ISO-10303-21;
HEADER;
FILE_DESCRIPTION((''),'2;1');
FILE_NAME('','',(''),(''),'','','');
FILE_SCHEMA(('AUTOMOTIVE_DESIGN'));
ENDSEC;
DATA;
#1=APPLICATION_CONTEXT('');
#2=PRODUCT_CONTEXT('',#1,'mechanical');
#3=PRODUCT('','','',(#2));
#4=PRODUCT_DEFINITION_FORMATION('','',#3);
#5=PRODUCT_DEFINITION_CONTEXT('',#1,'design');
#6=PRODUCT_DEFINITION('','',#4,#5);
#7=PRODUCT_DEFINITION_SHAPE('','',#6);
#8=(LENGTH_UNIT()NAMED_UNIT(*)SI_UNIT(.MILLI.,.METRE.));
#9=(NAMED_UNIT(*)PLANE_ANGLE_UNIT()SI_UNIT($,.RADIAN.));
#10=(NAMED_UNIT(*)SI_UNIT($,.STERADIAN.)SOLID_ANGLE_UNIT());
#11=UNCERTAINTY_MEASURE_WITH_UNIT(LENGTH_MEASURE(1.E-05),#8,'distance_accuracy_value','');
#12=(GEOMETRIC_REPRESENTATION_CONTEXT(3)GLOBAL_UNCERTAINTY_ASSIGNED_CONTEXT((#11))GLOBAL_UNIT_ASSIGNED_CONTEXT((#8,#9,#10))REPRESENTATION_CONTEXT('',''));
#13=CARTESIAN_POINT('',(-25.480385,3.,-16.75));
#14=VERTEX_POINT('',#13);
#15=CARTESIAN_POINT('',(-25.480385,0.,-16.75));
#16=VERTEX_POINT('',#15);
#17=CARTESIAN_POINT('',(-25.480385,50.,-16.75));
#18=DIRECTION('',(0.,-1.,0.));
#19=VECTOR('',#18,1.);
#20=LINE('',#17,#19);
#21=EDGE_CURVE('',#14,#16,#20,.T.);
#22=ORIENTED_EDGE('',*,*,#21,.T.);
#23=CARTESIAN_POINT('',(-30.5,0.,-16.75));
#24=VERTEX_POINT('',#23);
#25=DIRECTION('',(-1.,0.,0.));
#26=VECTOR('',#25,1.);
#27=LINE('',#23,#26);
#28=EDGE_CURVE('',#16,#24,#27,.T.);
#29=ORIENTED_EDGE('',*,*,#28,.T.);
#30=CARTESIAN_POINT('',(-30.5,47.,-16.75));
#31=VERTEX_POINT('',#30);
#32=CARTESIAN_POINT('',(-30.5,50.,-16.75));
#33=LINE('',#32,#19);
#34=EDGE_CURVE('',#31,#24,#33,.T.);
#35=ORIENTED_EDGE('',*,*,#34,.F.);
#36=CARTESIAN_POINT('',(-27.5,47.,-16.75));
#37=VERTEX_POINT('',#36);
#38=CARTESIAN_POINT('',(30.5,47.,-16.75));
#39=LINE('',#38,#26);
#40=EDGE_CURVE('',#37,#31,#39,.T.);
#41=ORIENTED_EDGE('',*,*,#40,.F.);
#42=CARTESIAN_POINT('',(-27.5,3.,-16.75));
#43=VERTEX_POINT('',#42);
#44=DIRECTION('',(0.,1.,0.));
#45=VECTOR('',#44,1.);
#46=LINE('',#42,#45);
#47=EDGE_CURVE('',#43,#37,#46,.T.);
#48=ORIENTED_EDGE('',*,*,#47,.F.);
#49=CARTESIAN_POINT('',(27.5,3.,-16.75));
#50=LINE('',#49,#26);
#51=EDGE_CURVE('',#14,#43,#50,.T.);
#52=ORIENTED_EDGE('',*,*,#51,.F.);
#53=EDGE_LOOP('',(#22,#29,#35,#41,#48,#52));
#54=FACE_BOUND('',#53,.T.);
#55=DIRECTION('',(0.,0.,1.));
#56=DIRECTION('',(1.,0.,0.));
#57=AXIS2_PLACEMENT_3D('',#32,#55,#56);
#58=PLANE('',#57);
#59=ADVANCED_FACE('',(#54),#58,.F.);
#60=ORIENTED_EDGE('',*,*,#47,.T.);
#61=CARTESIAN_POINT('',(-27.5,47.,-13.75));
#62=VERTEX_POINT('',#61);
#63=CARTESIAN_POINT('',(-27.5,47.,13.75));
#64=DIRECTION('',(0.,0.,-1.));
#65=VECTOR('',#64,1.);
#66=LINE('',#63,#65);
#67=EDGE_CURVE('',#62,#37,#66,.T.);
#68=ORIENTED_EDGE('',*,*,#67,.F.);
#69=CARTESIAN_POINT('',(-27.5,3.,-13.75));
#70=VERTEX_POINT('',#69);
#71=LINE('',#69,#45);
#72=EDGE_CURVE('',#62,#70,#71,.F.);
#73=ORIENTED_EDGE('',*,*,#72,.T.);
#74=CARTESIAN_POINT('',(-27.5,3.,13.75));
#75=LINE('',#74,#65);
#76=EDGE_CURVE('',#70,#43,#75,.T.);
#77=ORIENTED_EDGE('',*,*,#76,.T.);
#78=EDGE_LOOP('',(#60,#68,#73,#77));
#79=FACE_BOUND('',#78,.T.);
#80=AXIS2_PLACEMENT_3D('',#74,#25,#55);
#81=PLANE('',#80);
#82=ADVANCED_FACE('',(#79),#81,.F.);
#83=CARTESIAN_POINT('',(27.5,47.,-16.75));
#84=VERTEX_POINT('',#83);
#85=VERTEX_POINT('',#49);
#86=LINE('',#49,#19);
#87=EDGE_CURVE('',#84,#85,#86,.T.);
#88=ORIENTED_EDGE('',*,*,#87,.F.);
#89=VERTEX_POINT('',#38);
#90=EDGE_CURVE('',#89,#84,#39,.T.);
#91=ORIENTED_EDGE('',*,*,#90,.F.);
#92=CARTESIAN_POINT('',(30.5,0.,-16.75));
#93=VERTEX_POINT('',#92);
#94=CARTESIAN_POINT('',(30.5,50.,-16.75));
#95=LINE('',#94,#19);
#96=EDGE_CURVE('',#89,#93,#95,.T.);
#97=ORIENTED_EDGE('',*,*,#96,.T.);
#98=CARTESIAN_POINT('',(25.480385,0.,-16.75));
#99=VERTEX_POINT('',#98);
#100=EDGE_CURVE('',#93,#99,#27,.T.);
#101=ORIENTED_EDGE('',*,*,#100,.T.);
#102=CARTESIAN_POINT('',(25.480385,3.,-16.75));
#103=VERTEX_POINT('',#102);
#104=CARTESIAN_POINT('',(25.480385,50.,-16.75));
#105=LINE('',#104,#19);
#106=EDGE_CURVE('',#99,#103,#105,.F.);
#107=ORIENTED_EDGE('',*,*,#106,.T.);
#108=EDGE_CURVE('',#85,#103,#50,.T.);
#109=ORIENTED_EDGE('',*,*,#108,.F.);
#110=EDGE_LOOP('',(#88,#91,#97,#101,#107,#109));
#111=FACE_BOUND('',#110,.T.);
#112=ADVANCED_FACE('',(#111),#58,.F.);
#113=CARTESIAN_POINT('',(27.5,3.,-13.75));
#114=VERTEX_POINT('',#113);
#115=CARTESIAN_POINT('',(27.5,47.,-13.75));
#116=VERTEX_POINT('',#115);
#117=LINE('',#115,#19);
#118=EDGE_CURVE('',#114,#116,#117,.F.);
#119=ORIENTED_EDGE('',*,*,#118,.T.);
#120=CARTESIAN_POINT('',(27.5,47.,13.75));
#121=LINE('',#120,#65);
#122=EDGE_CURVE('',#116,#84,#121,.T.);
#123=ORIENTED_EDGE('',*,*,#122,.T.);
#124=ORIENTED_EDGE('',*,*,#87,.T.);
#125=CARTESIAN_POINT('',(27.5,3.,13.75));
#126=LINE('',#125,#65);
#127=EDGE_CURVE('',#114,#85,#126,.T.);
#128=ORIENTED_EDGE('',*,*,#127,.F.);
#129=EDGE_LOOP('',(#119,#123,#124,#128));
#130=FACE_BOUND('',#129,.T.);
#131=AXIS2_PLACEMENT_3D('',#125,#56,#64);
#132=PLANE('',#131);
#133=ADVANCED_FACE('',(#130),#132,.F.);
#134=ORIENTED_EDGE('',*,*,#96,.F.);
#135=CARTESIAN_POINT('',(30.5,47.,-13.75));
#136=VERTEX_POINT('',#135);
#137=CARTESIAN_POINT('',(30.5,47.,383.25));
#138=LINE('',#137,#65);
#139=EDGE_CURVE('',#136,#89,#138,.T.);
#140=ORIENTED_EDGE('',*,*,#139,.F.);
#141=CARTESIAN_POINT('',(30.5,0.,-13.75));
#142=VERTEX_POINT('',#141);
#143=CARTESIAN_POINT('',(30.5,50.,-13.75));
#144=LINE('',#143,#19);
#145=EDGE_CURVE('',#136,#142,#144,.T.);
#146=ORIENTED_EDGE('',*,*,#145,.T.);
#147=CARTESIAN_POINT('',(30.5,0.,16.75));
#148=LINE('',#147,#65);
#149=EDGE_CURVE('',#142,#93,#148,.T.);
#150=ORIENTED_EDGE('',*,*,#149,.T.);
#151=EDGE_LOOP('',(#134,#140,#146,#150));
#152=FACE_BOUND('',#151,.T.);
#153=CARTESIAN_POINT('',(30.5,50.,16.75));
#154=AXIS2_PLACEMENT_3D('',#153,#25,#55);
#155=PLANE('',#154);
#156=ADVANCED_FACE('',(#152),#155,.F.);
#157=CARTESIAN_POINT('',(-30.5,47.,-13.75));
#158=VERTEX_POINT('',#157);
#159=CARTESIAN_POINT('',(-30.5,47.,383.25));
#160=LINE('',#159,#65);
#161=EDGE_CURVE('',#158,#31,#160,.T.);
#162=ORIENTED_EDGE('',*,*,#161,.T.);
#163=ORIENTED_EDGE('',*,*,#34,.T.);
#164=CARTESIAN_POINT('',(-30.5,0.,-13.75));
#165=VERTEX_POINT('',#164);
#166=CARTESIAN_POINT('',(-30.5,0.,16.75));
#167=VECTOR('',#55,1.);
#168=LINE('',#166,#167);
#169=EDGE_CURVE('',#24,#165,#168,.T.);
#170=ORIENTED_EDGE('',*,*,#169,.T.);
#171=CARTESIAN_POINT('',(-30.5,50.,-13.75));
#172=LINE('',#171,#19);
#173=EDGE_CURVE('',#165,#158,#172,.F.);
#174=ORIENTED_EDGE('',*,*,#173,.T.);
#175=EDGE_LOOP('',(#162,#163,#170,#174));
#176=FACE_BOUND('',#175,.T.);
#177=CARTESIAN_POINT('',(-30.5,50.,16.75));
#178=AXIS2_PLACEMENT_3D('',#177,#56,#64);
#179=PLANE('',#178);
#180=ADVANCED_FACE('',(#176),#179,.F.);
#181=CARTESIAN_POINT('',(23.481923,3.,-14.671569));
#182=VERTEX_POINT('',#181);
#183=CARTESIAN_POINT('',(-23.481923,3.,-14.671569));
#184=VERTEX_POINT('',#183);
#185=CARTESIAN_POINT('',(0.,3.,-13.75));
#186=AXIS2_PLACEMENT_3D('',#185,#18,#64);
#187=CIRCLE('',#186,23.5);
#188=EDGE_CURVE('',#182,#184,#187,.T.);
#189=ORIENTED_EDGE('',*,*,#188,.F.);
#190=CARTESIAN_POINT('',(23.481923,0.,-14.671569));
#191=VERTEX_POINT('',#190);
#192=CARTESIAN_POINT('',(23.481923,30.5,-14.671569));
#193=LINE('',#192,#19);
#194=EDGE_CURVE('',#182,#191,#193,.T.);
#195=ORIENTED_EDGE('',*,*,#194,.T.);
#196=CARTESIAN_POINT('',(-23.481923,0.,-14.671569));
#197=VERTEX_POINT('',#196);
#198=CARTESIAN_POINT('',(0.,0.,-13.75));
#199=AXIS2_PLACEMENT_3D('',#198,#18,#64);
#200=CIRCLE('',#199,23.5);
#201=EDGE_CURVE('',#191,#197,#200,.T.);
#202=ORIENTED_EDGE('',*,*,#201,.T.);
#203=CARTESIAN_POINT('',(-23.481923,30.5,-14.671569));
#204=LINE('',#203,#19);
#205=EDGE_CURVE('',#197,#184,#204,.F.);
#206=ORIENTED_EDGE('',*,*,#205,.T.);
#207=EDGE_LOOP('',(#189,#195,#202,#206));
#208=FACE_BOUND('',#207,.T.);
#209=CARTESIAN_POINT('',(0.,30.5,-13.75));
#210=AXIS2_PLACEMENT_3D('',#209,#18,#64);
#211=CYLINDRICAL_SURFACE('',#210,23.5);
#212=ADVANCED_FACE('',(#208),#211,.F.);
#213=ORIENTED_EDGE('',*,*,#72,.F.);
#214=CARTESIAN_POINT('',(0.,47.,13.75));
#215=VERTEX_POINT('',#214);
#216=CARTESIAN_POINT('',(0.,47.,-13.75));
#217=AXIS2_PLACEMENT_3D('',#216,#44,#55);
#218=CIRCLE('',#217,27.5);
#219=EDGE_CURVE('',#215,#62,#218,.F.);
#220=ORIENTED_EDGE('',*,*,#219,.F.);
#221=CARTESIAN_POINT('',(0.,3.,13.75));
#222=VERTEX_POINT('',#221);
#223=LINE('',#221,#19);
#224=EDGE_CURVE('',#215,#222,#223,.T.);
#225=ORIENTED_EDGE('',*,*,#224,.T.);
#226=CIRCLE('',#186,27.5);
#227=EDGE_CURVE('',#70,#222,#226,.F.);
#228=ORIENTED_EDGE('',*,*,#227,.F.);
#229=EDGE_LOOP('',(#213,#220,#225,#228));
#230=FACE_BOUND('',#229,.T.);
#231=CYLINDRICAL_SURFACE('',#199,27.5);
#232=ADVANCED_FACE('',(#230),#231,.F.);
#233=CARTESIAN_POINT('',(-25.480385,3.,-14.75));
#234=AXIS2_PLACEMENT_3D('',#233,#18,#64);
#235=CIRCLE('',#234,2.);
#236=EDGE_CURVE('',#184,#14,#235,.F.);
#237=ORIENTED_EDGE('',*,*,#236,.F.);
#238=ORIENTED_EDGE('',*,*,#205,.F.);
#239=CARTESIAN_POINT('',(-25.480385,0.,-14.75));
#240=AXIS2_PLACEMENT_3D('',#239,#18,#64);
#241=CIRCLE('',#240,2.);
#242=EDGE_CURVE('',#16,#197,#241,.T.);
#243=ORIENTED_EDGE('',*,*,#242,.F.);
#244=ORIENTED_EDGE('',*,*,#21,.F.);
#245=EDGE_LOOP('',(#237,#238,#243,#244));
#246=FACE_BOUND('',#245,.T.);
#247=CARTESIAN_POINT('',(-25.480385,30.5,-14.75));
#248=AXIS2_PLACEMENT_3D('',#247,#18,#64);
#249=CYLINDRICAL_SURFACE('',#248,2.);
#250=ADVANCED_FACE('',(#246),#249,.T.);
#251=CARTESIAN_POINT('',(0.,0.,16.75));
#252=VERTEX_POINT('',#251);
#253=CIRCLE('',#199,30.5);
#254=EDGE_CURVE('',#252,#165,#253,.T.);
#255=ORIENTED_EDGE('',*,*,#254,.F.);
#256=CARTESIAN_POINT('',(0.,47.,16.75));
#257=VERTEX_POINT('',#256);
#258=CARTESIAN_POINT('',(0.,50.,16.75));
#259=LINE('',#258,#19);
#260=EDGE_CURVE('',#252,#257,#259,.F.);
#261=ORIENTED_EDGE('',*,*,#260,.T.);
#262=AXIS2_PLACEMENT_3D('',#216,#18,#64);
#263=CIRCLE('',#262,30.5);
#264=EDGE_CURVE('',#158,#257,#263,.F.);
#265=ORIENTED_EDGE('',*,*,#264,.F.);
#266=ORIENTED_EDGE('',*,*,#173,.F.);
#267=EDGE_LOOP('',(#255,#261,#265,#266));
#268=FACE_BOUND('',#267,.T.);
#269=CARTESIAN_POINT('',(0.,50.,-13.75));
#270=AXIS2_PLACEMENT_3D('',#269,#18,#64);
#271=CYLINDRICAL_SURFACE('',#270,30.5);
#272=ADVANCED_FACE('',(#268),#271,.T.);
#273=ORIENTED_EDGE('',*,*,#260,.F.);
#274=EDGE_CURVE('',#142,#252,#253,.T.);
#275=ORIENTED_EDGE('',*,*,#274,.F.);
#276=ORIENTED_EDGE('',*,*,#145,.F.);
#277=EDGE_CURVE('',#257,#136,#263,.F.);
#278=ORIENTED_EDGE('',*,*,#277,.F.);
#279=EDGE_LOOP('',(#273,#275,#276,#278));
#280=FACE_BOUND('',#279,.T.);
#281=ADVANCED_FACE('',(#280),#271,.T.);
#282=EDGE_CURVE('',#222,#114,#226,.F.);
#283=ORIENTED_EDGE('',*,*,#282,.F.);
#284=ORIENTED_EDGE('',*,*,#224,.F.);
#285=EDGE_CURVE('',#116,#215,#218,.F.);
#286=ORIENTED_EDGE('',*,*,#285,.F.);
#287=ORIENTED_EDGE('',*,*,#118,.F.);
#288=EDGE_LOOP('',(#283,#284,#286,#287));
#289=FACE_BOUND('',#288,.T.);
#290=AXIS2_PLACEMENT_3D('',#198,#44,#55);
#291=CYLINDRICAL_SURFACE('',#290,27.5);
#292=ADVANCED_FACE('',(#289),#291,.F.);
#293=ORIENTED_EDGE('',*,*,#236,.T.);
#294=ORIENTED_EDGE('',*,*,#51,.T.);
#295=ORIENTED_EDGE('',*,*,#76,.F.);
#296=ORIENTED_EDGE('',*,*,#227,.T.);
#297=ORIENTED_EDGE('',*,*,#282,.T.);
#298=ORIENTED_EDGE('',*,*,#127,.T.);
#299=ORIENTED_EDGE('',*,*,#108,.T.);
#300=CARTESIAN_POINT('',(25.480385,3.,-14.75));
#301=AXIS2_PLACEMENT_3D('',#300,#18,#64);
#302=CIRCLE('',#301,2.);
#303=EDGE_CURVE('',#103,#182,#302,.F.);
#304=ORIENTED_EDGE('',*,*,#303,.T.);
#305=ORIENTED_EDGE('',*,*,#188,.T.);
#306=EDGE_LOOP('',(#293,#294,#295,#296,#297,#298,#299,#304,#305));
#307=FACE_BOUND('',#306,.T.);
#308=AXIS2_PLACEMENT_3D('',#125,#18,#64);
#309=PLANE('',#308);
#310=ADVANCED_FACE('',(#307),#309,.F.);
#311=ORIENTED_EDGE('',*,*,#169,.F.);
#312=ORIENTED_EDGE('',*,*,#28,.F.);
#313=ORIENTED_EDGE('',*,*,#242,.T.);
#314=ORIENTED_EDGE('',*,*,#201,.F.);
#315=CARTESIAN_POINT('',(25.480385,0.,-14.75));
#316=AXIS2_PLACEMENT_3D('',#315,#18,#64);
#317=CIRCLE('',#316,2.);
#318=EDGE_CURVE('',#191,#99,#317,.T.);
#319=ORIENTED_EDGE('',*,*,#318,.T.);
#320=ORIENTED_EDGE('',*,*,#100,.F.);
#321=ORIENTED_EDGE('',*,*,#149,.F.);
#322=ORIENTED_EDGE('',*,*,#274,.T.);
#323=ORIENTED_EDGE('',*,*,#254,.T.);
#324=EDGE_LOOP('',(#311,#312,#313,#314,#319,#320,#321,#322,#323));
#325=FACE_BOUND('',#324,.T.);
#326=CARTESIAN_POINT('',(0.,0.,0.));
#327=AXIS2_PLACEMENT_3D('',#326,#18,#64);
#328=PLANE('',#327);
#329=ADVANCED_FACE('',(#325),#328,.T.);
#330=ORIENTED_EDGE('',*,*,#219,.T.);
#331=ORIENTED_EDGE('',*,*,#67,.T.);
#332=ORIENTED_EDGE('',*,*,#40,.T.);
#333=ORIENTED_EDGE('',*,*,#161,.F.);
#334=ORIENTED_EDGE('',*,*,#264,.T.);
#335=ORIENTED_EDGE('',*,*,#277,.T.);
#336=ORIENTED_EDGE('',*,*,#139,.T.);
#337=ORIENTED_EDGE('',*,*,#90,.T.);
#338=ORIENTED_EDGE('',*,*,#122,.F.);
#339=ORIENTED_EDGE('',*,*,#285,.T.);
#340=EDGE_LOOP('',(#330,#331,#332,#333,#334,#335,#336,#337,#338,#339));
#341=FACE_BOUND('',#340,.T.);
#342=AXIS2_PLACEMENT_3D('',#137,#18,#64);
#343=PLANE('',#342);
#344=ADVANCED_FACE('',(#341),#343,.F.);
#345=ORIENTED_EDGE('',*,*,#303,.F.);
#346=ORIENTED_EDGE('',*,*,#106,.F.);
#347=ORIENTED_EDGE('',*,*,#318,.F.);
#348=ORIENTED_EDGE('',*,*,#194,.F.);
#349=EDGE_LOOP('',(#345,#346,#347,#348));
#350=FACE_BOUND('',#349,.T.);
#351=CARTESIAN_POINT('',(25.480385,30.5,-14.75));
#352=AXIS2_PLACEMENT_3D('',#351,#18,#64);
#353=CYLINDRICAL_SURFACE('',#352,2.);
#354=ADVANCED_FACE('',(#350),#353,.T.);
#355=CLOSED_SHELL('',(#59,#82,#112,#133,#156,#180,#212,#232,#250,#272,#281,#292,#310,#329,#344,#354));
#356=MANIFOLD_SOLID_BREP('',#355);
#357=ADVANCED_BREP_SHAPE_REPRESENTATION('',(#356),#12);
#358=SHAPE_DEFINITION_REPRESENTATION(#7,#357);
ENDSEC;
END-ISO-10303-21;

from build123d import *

# Parameters (mm, degrees)
SKETCH_1_W          = 61
SKETCH_1_H          = 33.5
EXTRUDE_1_DEPTH     = 50
SKETCH_2_W          = 55
SKETCH_2_H          = 44
CUT_EXTRUDE_1_DEPTH = 30.5
FILLET_3_R          = 27.5
FILLET_4_R          = 30.5
SKETCH_3_R          = 23.5
CUT_EXTRUDE_2_DEPTH = 30.5
SKETCH_5_R          = 16
CUT_EXTRUDE_4_DEPTH = 30.5
FILLET_5_R          = 4
FILLET_6_R          = 2
SKETCH_6_W          = 61
SKETCH_6_H          = 3
CUT_EXTRUDE_5_DEPTH = 400


with BuildPart() as part:
    # 스케치1 → 보스-돌출1 (new body)
    with BuildSketch(Plane(origin=(0, 0, 0), x_dir=(1, 0, 0), z_dir=(0, 1, 0))):
        Rectangle(SKETCH_1_W, SKETCH_1_H)
    extrude(amount=EXTRUDE_1_DEPTH)

    # 스케치2 → 컷-돌출1 (cut)
    with BuildSketch(Plane(origin=(0, 0, -16.75), x_dir=(-1, 0, 0), z_dir=(0, 0, -1))):
        with Locations((0, 25)):
            Rectangle(SKETCH_2_W, SKETCH_2_H)
    extrude(amount=-CUT_EXTRUDE_1_DEPTH, mode=Mode.SUBTRACT)

    # 필렛3
    fillet_3_edges = [part.edges().sort_by_distance(p)[0] for p in [
        (-27.5, 25, 13.75),
        (27.5, 25, 13.75),
    ]]
    fillet(fillet_3_edges, radius=FILLET_3_R - 0.0001)  # a hair under: the kernel refuses the full size

    # 필렛4
    fillet_4_edges = [part.edges().sort_by_distance(p)[0] for p in [
        (-30.5, 25, 16.75),
        (30.5, 25, 16.75),
    ]]
    fillet(fillet_4_edges, radius=FILLET_4_R - 0.0001)  # a hair under: the kernel refuses the full size

    # 스케치3 → 컷-돌출2 (cut)
    with BuildSketch(Plane.XZ):
        with Locations((0, -13.75)):
            Circle(SKETCH_3_R)
    extrude(amount=-CUT_EXTRUDE_2_DEPTH, mode=Mode.SUBTRACT)

    # 스케치5 → 컷-돌출4 (cut)
    with BuildSketch(Plane.XZ.offset(-47)):
        with Locations((0, -13.75)):
            Circle(SKETCH_5_R)
    extrude(amount=-CUT_EXTRUDE_4_DEPTH, mode=Mode.SUBTRACT)

    # 필렛5
    fillet_5_edges = [part.edges().sort_by_distance(p)[0] for p in [
        (-15.716233646, 48.5, -16.75),
        (15.716233646, 48.5, -16.75),
    ]]
    fillet(fillet_5_edges, radius=FILLET_5_R)

    # 필렛6
    fillet_6_edges = [part.edges().sort_by_distance(p)[0] for p in [
        (-23.307724042, 1.5, -16.75),
        (23.307724042, 1.5, -16.75),
    ]]
    fillet(fillet_6_edges, radius=FILLET_6_R)

    # 스케치6 → 컷-돌출5 (cut)
    with BuildSketch(Plane(origin=(0, 0, -16.75), x_dir=(-1, 0, 0), z_dir=(0, 0, -1))):
        with Locations((0, 48.5)):
            Rectangle(SKETCH_6_W, SKETCH_6_H)
    extrude(amount=-CUT_EXTRUDE_5_DEPTH, mode=Mode.SUBTRACT)


solid = part.part
